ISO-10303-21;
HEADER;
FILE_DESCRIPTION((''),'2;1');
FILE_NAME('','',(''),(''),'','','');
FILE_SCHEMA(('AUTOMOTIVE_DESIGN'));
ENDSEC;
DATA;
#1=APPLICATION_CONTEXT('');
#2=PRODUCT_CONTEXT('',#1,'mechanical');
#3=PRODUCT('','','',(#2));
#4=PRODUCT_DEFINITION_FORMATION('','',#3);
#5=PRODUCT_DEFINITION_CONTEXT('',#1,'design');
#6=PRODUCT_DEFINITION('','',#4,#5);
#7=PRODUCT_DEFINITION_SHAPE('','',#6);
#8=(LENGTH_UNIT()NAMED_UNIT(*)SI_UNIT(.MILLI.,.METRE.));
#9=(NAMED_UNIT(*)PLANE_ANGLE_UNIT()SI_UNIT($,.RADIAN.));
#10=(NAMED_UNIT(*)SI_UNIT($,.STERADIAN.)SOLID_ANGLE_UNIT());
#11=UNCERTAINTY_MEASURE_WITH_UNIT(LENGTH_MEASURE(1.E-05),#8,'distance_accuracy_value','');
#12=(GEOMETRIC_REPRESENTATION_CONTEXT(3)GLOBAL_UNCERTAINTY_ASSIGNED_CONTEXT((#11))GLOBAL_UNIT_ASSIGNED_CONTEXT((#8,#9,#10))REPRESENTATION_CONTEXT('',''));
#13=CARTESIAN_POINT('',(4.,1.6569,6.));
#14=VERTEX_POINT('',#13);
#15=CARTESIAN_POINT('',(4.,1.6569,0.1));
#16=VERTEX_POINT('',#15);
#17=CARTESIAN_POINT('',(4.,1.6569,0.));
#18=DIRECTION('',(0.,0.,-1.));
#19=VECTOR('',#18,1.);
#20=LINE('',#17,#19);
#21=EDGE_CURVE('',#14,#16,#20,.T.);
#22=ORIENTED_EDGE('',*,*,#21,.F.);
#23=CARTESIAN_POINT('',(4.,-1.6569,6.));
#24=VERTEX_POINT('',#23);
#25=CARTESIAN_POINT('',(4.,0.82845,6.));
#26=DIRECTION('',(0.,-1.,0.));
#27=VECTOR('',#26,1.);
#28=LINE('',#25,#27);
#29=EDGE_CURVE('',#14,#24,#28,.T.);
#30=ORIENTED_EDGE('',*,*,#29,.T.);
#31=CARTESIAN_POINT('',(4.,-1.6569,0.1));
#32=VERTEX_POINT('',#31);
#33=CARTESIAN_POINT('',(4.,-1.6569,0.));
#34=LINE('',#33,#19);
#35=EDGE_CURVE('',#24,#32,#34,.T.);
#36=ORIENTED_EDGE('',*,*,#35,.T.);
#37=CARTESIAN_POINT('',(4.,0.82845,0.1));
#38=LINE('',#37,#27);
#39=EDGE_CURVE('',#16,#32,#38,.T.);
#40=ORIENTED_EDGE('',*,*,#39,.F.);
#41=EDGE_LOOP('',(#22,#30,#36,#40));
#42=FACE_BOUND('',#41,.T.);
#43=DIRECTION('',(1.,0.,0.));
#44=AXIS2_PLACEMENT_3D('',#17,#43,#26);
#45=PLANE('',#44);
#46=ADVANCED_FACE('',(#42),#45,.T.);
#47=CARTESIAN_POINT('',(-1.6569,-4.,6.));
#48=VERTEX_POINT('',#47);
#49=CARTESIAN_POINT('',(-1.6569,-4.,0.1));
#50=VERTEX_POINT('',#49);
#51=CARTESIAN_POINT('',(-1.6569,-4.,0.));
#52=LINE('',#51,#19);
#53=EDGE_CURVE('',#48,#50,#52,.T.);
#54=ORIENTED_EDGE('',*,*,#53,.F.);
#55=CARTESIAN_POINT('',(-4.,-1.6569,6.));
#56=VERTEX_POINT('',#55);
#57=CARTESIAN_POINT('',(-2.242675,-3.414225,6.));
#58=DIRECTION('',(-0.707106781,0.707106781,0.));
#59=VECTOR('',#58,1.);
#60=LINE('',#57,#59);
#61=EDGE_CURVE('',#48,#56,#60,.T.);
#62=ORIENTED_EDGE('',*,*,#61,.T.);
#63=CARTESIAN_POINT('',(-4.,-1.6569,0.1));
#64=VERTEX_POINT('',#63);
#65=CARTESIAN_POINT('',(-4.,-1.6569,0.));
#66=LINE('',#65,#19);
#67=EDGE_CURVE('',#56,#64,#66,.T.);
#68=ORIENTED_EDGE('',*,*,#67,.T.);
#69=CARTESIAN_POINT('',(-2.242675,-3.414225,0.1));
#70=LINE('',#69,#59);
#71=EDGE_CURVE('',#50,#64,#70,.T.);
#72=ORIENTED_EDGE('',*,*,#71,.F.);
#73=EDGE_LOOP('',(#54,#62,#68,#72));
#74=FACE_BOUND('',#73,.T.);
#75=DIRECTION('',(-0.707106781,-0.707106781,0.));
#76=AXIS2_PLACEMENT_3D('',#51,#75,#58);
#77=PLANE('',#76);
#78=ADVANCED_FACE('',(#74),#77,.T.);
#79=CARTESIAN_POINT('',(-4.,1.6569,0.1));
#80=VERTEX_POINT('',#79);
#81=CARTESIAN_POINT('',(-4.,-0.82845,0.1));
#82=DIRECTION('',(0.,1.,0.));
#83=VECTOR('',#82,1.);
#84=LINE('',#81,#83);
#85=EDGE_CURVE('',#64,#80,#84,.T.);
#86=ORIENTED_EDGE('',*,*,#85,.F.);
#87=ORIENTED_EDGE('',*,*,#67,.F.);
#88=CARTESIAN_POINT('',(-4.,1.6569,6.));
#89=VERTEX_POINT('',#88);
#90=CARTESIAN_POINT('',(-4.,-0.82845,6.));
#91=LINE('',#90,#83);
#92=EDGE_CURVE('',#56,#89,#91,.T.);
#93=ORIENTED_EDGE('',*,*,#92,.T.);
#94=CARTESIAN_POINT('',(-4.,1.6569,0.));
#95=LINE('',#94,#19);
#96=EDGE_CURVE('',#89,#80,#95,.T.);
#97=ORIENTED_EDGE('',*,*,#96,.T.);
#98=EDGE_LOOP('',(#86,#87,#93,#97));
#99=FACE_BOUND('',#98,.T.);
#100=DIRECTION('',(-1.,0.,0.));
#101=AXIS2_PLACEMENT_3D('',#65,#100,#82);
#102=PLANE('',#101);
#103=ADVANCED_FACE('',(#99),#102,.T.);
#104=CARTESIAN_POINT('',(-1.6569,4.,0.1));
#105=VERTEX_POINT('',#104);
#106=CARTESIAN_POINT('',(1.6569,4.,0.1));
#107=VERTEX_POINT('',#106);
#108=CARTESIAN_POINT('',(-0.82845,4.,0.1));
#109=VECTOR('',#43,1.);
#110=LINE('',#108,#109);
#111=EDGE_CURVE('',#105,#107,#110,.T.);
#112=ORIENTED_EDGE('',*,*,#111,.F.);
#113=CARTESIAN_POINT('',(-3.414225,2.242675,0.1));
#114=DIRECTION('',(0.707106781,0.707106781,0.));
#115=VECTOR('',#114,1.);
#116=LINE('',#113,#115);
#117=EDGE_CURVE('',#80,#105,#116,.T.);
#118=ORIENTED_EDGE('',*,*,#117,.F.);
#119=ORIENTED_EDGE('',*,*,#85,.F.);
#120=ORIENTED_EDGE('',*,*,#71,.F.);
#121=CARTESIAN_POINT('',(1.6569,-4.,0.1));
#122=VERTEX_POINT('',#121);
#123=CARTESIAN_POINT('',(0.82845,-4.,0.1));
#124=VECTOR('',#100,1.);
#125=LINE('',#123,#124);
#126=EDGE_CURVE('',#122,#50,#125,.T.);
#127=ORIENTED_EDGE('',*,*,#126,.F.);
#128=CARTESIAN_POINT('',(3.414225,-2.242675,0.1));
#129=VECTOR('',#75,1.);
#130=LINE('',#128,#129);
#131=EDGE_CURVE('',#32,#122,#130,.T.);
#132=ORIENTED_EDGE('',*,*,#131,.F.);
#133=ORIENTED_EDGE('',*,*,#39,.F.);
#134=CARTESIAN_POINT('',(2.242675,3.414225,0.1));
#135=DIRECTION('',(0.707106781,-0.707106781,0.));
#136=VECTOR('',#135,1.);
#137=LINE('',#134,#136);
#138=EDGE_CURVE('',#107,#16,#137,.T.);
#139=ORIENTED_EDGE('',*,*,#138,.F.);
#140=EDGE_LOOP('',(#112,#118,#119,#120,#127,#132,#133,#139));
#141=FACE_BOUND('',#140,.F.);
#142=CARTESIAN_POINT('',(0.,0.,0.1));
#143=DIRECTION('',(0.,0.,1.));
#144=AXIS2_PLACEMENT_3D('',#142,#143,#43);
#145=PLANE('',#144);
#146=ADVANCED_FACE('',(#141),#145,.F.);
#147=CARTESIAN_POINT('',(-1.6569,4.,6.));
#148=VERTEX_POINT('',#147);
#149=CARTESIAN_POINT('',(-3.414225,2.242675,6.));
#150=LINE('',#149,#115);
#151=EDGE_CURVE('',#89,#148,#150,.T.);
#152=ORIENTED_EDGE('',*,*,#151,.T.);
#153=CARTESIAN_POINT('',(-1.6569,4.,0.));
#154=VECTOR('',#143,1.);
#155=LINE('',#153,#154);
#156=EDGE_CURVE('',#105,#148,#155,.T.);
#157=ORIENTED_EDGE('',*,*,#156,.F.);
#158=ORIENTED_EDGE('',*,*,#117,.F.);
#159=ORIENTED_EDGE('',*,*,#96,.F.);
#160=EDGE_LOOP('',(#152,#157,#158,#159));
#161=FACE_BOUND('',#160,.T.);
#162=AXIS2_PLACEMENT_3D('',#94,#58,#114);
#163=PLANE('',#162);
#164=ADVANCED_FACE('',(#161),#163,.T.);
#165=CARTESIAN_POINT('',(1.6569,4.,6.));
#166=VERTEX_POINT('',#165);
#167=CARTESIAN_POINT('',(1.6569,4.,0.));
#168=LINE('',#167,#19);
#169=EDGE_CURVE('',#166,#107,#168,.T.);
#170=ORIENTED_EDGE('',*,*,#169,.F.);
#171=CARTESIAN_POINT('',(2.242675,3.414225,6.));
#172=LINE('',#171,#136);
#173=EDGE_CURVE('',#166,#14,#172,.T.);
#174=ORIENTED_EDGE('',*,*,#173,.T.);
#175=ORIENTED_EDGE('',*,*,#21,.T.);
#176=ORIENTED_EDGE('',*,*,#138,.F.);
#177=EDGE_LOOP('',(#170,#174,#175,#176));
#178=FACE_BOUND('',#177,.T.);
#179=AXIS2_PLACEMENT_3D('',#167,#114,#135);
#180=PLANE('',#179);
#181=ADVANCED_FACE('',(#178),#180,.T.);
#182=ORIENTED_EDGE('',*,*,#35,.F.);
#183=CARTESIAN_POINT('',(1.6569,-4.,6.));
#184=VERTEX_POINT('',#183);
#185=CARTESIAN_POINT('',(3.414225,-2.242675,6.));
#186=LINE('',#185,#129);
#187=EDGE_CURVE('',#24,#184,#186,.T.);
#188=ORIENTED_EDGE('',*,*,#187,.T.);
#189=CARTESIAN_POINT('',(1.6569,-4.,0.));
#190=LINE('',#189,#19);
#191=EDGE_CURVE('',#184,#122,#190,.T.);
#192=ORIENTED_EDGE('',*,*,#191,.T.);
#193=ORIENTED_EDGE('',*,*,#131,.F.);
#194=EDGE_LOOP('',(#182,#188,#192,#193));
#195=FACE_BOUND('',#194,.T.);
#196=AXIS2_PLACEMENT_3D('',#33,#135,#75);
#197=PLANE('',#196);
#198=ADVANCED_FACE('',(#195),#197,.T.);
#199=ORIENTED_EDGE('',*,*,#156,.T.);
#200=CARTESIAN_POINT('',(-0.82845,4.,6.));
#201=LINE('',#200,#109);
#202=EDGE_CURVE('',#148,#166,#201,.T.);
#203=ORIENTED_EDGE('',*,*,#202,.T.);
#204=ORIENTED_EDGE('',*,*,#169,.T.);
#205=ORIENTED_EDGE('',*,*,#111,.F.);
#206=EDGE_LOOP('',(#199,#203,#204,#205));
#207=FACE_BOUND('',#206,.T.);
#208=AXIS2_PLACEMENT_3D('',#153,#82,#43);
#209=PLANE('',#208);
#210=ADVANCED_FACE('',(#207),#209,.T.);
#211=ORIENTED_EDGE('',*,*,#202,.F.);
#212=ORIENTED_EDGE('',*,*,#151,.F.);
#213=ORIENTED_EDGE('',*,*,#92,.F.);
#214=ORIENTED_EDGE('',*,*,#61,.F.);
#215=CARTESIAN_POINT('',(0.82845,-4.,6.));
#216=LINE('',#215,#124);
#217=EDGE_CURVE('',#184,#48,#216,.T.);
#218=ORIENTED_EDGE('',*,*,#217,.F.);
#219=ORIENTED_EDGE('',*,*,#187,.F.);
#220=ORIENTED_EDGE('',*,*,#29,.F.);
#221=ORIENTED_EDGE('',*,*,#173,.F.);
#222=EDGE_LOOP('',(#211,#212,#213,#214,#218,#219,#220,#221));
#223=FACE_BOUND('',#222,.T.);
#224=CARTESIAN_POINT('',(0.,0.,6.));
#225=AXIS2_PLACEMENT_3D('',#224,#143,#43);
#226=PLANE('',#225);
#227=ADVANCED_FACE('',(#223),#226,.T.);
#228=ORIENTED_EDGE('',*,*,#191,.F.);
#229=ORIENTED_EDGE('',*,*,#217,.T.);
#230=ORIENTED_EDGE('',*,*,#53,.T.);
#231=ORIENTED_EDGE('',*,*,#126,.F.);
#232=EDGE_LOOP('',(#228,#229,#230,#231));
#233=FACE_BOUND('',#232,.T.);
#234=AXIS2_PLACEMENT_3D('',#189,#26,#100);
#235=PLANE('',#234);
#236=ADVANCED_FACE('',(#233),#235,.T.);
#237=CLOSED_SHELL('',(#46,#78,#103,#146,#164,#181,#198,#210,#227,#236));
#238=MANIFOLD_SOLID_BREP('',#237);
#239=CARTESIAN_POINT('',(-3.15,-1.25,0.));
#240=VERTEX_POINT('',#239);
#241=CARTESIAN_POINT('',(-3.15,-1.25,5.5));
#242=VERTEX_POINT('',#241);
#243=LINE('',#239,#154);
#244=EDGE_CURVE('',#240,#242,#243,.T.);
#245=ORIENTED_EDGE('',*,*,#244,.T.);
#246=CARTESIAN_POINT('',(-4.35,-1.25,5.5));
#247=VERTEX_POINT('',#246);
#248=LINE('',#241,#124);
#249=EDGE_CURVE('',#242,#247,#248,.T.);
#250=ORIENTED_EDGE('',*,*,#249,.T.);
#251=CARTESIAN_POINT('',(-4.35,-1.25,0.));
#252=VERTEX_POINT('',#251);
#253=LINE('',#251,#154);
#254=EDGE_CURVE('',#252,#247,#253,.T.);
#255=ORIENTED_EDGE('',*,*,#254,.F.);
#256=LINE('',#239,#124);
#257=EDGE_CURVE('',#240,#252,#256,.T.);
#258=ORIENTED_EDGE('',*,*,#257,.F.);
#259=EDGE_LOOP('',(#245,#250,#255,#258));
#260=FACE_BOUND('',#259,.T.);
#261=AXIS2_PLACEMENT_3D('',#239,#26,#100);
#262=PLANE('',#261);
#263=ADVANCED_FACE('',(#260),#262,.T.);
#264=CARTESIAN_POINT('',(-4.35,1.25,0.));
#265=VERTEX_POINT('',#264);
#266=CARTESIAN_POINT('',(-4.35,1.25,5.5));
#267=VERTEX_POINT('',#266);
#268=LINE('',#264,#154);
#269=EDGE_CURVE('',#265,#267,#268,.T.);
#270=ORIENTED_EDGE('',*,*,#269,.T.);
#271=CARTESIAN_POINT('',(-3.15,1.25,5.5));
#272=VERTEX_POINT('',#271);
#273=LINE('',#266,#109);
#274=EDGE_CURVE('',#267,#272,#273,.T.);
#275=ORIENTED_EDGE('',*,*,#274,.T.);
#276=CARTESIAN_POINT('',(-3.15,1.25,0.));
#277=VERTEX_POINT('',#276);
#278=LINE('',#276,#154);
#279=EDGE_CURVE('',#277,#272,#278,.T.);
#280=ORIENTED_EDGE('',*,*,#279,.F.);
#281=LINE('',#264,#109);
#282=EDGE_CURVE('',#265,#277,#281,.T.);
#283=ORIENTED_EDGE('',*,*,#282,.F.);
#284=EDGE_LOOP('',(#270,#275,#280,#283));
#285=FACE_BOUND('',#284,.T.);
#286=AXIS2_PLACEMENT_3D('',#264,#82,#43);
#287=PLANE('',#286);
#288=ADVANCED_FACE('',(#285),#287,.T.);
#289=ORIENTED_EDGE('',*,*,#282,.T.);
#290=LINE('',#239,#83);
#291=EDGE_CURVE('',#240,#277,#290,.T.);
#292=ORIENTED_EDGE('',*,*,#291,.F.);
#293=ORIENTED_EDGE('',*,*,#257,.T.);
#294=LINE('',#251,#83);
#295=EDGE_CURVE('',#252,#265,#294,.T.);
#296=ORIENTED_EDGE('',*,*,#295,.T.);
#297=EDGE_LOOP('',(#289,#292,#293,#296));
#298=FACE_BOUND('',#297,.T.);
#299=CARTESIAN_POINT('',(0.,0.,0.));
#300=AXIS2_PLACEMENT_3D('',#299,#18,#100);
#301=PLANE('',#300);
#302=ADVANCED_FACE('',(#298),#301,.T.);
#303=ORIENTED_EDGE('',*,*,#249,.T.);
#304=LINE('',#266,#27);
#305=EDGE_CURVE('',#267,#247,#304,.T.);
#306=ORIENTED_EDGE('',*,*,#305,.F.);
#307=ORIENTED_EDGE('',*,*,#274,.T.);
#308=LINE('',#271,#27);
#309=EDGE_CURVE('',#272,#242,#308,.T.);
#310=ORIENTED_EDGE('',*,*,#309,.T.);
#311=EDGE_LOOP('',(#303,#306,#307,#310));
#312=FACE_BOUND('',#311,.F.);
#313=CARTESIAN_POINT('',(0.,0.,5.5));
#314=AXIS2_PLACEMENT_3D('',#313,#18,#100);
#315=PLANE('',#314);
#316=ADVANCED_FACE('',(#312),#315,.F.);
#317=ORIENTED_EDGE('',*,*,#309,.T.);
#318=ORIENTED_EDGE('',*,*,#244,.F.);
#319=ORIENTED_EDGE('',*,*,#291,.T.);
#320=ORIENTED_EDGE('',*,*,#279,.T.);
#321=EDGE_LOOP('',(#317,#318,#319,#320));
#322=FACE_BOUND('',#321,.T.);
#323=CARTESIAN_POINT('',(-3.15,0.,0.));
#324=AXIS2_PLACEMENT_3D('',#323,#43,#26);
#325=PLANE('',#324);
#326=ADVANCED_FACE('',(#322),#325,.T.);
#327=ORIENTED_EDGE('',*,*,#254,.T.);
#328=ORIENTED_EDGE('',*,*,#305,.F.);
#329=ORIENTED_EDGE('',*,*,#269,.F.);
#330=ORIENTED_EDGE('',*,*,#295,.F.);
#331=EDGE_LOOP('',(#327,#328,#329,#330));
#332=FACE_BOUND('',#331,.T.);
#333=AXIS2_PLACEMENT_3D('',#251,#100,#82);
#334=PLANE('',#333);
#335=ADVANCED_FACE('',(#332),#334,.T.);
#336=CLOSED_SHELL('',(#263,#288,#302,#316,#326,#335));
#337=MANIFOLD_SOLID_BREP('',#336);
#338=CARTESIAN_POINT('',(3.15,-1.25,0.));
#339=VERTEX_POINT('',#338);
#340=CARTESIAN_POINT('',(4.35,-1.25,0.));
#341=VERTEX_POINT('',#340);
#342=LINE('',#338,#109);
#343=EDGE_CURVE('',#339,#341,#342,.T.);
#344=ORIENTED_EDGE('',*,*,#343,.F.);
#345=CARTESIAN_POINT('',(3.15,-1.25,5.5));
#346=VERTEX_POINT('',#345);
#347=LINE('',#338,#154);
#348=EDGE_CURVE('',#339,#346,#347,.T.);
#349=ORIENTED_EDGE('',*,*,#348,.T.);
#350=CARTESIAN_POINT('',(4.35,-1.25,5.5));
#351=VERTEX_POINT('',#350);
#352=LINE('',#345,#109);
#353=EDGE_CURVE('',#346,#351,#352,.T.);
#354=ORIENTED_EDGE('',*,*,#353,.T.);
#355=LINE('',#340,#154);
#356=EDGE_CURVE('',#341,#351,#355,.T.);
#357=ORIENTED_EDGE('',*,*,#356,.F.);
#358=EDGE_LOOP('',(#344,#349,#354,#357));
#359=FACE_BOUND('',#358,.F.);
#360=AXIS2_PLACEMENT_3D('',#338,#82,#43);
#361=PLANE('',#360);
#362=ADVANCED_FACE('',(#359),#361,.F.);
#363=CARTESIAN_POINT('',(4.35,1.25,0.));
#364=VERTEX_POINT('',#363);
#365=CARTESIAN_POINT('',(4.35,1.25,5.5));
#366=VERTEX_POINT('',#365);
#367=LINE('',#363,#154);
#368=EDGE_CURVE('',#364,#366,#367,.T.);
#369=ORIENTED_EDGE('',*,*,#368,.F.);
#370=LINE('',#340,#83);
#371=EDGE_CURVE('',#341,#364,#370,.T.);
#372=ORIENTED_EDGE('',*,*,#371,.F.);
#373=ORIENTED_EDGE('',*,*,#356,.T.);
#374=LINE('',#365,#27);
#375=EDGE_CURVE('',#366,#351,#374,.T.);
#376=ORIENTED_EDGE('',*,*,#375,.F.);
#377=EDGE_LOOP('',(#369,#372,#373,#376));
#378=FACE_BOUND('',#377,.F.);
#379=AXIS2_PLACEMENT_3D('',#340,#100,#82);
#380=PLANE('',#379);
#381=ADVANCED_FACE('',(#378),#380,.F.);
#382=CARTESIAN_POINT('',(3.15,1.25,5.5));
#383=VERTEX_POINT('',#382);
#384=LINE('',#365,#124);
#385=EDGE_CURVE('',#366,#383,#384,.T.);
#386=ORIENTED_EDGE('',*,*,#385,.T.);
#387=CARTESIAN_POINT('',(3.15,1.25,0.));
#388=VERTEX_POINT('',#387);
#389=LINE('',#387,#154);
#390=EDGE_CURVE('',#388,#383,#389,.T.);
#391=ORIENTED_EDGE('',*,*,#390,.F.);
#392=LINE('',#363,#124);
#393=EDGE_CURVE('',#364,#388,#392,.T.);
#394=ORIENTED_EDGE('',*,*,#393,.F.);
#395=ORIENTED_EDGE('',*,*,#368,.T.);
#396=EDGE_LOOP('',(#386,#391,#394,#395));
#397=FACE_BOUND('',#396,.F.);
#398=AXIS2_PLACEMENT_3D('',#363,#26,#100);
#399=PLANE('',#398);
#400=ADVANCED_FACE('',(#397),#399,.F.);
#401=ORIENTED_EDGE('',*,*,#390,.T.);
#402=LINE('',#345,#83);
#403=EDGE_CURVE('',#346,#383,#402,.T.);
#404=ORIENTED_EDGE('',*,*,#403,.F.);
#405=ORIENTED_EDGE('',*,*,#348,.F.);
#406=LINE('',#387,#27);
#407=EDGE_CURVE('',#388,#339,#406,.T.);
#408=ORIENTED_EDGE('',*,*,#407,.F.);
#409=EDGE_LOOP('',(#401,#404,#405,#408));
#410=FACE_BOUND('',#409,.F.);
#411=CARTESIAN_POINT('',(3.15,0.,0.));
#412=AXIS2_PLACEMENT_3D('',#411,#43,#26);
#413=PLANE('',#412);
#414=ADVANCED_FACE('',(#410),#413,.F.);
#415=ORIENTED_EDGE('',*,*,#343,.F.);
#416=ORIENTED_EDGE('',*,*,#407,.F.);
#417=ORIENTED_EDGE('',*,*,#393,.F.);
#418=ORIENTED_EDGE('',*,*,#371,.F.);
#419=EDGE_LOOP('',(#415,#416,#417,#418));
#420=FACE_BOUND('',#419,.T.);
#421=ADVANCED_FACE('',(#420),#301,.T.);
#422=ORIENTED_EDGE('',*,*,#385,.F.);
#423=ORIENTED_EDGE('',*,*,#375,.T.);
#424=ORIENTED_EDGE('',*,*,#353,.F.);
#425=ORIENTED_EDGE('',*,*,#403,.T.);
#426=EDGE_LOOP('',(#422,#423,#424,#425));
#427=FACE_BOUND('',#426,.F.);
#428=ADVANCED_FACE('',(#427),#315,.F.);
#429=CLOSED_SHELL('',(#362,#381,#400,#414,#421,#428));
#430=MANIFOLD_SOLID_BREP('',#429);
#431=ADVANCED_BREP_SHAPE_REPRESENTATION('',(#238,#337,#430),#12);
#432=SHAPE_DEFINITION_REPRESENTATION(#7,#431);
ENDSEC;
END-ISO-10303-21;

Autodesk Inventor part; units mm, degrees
ref_plane "YZ Plane" through (0, 0, 0) normal (1, 0, 0) x (0, 1, 0)
ref_plane "XZ Plane" through (0, 0, 0) normal (0, 1, 0) x (-1, 0, 0)
ref_plane "XY Plane" through (0, 0, 0) normal (0, 0, 1) x (1, 0, 0)
sketch "Sketch1" plane through (0, 0, 0) normal (0, 0, 1) x (1, 0, 0)
  line L0 (-1.6569, 4) -> (1.6569, 4)
  line L1 (1.6569, 4) -> (4, 1.6569)
  line L2 (4, 1.6569) -> (4, -1.6569)
  line L3 (4, -1.6569) -> (1.6569, -4)
  line L4 (1.6569, -4) -> (-1.6569, -4)
  line L5 (-1.6569, -4) -> (-4, -1.6569)
  line L6 (-4, -1.6569) -> (-4, 1.6569)
  line L7 (-4, 1.6569) -> (-1.6569, 4)
  point P0 (0, 0)
  point P1 (0, 0)
  dimension "d0" = 8
extrude "Extrusion1" add sketch "Sketch1" along normal blind 6
sketch "Sketch2" plane through (0, 0, 0) normal (0, 0, -1) x (-1, 0, 0)
  line L0 (-3.15, -1.25) -> (-4.35, -1.25)
  line L1 (-4.35, -1.25) -> (-4.35, 1.25)
  line L2 (-4.35, 1.25) -> (-3.15, 1.25)
  line L3 (-3.15, 1.25) -> (-3.15, -1.25)
  line L4 (-3.15, -1.25) -> (-4.35, 1.25) construction
  line L5 (-4.35, -1.25) -> (-3.15, 1.25) construction
  line L6 (3.15, -1.25) -> (4.35, -1.25)
  line L7 (4.35, -1.25) -> (4.35, 1.25)
  line L8 (4.35, 1.25) -> (3.15, 1.25)
  line L9 (3.15, 1.25) -> (3.15, -1.25)
  line L10 (3.15, -1.25) -> (4.35, 1.25) construction
  line L11 (4.35, -1.25) -> (3.15, 1.25) construction
  line L12 (0, -5.6) -> (0, 5.6) projected
  line L13 (6.09, 0) -> (-6.09, 0) projected
  point P0 (0, 0)
  point P1 (-3.75, 0)
  point P2 (3.75, 0)
  point P3 (-3.75, 0)
  point P4 (3.75, 0)
  dimension "d3" = 6.3
  dimension "d4" = 1.2
  dimension "d5" = 2.5
extrude "Extrusion2" add sketch "Sketch2" against normal blind 5.5 separate body
thicken "Thicken1" operation add thickness 0.1 both sides no extend neighbours yes toward (0, 0, 1) bodies 1 faces at (-0.2288, 0.5523, 0)
properties part number "CDRH8D58LD"
